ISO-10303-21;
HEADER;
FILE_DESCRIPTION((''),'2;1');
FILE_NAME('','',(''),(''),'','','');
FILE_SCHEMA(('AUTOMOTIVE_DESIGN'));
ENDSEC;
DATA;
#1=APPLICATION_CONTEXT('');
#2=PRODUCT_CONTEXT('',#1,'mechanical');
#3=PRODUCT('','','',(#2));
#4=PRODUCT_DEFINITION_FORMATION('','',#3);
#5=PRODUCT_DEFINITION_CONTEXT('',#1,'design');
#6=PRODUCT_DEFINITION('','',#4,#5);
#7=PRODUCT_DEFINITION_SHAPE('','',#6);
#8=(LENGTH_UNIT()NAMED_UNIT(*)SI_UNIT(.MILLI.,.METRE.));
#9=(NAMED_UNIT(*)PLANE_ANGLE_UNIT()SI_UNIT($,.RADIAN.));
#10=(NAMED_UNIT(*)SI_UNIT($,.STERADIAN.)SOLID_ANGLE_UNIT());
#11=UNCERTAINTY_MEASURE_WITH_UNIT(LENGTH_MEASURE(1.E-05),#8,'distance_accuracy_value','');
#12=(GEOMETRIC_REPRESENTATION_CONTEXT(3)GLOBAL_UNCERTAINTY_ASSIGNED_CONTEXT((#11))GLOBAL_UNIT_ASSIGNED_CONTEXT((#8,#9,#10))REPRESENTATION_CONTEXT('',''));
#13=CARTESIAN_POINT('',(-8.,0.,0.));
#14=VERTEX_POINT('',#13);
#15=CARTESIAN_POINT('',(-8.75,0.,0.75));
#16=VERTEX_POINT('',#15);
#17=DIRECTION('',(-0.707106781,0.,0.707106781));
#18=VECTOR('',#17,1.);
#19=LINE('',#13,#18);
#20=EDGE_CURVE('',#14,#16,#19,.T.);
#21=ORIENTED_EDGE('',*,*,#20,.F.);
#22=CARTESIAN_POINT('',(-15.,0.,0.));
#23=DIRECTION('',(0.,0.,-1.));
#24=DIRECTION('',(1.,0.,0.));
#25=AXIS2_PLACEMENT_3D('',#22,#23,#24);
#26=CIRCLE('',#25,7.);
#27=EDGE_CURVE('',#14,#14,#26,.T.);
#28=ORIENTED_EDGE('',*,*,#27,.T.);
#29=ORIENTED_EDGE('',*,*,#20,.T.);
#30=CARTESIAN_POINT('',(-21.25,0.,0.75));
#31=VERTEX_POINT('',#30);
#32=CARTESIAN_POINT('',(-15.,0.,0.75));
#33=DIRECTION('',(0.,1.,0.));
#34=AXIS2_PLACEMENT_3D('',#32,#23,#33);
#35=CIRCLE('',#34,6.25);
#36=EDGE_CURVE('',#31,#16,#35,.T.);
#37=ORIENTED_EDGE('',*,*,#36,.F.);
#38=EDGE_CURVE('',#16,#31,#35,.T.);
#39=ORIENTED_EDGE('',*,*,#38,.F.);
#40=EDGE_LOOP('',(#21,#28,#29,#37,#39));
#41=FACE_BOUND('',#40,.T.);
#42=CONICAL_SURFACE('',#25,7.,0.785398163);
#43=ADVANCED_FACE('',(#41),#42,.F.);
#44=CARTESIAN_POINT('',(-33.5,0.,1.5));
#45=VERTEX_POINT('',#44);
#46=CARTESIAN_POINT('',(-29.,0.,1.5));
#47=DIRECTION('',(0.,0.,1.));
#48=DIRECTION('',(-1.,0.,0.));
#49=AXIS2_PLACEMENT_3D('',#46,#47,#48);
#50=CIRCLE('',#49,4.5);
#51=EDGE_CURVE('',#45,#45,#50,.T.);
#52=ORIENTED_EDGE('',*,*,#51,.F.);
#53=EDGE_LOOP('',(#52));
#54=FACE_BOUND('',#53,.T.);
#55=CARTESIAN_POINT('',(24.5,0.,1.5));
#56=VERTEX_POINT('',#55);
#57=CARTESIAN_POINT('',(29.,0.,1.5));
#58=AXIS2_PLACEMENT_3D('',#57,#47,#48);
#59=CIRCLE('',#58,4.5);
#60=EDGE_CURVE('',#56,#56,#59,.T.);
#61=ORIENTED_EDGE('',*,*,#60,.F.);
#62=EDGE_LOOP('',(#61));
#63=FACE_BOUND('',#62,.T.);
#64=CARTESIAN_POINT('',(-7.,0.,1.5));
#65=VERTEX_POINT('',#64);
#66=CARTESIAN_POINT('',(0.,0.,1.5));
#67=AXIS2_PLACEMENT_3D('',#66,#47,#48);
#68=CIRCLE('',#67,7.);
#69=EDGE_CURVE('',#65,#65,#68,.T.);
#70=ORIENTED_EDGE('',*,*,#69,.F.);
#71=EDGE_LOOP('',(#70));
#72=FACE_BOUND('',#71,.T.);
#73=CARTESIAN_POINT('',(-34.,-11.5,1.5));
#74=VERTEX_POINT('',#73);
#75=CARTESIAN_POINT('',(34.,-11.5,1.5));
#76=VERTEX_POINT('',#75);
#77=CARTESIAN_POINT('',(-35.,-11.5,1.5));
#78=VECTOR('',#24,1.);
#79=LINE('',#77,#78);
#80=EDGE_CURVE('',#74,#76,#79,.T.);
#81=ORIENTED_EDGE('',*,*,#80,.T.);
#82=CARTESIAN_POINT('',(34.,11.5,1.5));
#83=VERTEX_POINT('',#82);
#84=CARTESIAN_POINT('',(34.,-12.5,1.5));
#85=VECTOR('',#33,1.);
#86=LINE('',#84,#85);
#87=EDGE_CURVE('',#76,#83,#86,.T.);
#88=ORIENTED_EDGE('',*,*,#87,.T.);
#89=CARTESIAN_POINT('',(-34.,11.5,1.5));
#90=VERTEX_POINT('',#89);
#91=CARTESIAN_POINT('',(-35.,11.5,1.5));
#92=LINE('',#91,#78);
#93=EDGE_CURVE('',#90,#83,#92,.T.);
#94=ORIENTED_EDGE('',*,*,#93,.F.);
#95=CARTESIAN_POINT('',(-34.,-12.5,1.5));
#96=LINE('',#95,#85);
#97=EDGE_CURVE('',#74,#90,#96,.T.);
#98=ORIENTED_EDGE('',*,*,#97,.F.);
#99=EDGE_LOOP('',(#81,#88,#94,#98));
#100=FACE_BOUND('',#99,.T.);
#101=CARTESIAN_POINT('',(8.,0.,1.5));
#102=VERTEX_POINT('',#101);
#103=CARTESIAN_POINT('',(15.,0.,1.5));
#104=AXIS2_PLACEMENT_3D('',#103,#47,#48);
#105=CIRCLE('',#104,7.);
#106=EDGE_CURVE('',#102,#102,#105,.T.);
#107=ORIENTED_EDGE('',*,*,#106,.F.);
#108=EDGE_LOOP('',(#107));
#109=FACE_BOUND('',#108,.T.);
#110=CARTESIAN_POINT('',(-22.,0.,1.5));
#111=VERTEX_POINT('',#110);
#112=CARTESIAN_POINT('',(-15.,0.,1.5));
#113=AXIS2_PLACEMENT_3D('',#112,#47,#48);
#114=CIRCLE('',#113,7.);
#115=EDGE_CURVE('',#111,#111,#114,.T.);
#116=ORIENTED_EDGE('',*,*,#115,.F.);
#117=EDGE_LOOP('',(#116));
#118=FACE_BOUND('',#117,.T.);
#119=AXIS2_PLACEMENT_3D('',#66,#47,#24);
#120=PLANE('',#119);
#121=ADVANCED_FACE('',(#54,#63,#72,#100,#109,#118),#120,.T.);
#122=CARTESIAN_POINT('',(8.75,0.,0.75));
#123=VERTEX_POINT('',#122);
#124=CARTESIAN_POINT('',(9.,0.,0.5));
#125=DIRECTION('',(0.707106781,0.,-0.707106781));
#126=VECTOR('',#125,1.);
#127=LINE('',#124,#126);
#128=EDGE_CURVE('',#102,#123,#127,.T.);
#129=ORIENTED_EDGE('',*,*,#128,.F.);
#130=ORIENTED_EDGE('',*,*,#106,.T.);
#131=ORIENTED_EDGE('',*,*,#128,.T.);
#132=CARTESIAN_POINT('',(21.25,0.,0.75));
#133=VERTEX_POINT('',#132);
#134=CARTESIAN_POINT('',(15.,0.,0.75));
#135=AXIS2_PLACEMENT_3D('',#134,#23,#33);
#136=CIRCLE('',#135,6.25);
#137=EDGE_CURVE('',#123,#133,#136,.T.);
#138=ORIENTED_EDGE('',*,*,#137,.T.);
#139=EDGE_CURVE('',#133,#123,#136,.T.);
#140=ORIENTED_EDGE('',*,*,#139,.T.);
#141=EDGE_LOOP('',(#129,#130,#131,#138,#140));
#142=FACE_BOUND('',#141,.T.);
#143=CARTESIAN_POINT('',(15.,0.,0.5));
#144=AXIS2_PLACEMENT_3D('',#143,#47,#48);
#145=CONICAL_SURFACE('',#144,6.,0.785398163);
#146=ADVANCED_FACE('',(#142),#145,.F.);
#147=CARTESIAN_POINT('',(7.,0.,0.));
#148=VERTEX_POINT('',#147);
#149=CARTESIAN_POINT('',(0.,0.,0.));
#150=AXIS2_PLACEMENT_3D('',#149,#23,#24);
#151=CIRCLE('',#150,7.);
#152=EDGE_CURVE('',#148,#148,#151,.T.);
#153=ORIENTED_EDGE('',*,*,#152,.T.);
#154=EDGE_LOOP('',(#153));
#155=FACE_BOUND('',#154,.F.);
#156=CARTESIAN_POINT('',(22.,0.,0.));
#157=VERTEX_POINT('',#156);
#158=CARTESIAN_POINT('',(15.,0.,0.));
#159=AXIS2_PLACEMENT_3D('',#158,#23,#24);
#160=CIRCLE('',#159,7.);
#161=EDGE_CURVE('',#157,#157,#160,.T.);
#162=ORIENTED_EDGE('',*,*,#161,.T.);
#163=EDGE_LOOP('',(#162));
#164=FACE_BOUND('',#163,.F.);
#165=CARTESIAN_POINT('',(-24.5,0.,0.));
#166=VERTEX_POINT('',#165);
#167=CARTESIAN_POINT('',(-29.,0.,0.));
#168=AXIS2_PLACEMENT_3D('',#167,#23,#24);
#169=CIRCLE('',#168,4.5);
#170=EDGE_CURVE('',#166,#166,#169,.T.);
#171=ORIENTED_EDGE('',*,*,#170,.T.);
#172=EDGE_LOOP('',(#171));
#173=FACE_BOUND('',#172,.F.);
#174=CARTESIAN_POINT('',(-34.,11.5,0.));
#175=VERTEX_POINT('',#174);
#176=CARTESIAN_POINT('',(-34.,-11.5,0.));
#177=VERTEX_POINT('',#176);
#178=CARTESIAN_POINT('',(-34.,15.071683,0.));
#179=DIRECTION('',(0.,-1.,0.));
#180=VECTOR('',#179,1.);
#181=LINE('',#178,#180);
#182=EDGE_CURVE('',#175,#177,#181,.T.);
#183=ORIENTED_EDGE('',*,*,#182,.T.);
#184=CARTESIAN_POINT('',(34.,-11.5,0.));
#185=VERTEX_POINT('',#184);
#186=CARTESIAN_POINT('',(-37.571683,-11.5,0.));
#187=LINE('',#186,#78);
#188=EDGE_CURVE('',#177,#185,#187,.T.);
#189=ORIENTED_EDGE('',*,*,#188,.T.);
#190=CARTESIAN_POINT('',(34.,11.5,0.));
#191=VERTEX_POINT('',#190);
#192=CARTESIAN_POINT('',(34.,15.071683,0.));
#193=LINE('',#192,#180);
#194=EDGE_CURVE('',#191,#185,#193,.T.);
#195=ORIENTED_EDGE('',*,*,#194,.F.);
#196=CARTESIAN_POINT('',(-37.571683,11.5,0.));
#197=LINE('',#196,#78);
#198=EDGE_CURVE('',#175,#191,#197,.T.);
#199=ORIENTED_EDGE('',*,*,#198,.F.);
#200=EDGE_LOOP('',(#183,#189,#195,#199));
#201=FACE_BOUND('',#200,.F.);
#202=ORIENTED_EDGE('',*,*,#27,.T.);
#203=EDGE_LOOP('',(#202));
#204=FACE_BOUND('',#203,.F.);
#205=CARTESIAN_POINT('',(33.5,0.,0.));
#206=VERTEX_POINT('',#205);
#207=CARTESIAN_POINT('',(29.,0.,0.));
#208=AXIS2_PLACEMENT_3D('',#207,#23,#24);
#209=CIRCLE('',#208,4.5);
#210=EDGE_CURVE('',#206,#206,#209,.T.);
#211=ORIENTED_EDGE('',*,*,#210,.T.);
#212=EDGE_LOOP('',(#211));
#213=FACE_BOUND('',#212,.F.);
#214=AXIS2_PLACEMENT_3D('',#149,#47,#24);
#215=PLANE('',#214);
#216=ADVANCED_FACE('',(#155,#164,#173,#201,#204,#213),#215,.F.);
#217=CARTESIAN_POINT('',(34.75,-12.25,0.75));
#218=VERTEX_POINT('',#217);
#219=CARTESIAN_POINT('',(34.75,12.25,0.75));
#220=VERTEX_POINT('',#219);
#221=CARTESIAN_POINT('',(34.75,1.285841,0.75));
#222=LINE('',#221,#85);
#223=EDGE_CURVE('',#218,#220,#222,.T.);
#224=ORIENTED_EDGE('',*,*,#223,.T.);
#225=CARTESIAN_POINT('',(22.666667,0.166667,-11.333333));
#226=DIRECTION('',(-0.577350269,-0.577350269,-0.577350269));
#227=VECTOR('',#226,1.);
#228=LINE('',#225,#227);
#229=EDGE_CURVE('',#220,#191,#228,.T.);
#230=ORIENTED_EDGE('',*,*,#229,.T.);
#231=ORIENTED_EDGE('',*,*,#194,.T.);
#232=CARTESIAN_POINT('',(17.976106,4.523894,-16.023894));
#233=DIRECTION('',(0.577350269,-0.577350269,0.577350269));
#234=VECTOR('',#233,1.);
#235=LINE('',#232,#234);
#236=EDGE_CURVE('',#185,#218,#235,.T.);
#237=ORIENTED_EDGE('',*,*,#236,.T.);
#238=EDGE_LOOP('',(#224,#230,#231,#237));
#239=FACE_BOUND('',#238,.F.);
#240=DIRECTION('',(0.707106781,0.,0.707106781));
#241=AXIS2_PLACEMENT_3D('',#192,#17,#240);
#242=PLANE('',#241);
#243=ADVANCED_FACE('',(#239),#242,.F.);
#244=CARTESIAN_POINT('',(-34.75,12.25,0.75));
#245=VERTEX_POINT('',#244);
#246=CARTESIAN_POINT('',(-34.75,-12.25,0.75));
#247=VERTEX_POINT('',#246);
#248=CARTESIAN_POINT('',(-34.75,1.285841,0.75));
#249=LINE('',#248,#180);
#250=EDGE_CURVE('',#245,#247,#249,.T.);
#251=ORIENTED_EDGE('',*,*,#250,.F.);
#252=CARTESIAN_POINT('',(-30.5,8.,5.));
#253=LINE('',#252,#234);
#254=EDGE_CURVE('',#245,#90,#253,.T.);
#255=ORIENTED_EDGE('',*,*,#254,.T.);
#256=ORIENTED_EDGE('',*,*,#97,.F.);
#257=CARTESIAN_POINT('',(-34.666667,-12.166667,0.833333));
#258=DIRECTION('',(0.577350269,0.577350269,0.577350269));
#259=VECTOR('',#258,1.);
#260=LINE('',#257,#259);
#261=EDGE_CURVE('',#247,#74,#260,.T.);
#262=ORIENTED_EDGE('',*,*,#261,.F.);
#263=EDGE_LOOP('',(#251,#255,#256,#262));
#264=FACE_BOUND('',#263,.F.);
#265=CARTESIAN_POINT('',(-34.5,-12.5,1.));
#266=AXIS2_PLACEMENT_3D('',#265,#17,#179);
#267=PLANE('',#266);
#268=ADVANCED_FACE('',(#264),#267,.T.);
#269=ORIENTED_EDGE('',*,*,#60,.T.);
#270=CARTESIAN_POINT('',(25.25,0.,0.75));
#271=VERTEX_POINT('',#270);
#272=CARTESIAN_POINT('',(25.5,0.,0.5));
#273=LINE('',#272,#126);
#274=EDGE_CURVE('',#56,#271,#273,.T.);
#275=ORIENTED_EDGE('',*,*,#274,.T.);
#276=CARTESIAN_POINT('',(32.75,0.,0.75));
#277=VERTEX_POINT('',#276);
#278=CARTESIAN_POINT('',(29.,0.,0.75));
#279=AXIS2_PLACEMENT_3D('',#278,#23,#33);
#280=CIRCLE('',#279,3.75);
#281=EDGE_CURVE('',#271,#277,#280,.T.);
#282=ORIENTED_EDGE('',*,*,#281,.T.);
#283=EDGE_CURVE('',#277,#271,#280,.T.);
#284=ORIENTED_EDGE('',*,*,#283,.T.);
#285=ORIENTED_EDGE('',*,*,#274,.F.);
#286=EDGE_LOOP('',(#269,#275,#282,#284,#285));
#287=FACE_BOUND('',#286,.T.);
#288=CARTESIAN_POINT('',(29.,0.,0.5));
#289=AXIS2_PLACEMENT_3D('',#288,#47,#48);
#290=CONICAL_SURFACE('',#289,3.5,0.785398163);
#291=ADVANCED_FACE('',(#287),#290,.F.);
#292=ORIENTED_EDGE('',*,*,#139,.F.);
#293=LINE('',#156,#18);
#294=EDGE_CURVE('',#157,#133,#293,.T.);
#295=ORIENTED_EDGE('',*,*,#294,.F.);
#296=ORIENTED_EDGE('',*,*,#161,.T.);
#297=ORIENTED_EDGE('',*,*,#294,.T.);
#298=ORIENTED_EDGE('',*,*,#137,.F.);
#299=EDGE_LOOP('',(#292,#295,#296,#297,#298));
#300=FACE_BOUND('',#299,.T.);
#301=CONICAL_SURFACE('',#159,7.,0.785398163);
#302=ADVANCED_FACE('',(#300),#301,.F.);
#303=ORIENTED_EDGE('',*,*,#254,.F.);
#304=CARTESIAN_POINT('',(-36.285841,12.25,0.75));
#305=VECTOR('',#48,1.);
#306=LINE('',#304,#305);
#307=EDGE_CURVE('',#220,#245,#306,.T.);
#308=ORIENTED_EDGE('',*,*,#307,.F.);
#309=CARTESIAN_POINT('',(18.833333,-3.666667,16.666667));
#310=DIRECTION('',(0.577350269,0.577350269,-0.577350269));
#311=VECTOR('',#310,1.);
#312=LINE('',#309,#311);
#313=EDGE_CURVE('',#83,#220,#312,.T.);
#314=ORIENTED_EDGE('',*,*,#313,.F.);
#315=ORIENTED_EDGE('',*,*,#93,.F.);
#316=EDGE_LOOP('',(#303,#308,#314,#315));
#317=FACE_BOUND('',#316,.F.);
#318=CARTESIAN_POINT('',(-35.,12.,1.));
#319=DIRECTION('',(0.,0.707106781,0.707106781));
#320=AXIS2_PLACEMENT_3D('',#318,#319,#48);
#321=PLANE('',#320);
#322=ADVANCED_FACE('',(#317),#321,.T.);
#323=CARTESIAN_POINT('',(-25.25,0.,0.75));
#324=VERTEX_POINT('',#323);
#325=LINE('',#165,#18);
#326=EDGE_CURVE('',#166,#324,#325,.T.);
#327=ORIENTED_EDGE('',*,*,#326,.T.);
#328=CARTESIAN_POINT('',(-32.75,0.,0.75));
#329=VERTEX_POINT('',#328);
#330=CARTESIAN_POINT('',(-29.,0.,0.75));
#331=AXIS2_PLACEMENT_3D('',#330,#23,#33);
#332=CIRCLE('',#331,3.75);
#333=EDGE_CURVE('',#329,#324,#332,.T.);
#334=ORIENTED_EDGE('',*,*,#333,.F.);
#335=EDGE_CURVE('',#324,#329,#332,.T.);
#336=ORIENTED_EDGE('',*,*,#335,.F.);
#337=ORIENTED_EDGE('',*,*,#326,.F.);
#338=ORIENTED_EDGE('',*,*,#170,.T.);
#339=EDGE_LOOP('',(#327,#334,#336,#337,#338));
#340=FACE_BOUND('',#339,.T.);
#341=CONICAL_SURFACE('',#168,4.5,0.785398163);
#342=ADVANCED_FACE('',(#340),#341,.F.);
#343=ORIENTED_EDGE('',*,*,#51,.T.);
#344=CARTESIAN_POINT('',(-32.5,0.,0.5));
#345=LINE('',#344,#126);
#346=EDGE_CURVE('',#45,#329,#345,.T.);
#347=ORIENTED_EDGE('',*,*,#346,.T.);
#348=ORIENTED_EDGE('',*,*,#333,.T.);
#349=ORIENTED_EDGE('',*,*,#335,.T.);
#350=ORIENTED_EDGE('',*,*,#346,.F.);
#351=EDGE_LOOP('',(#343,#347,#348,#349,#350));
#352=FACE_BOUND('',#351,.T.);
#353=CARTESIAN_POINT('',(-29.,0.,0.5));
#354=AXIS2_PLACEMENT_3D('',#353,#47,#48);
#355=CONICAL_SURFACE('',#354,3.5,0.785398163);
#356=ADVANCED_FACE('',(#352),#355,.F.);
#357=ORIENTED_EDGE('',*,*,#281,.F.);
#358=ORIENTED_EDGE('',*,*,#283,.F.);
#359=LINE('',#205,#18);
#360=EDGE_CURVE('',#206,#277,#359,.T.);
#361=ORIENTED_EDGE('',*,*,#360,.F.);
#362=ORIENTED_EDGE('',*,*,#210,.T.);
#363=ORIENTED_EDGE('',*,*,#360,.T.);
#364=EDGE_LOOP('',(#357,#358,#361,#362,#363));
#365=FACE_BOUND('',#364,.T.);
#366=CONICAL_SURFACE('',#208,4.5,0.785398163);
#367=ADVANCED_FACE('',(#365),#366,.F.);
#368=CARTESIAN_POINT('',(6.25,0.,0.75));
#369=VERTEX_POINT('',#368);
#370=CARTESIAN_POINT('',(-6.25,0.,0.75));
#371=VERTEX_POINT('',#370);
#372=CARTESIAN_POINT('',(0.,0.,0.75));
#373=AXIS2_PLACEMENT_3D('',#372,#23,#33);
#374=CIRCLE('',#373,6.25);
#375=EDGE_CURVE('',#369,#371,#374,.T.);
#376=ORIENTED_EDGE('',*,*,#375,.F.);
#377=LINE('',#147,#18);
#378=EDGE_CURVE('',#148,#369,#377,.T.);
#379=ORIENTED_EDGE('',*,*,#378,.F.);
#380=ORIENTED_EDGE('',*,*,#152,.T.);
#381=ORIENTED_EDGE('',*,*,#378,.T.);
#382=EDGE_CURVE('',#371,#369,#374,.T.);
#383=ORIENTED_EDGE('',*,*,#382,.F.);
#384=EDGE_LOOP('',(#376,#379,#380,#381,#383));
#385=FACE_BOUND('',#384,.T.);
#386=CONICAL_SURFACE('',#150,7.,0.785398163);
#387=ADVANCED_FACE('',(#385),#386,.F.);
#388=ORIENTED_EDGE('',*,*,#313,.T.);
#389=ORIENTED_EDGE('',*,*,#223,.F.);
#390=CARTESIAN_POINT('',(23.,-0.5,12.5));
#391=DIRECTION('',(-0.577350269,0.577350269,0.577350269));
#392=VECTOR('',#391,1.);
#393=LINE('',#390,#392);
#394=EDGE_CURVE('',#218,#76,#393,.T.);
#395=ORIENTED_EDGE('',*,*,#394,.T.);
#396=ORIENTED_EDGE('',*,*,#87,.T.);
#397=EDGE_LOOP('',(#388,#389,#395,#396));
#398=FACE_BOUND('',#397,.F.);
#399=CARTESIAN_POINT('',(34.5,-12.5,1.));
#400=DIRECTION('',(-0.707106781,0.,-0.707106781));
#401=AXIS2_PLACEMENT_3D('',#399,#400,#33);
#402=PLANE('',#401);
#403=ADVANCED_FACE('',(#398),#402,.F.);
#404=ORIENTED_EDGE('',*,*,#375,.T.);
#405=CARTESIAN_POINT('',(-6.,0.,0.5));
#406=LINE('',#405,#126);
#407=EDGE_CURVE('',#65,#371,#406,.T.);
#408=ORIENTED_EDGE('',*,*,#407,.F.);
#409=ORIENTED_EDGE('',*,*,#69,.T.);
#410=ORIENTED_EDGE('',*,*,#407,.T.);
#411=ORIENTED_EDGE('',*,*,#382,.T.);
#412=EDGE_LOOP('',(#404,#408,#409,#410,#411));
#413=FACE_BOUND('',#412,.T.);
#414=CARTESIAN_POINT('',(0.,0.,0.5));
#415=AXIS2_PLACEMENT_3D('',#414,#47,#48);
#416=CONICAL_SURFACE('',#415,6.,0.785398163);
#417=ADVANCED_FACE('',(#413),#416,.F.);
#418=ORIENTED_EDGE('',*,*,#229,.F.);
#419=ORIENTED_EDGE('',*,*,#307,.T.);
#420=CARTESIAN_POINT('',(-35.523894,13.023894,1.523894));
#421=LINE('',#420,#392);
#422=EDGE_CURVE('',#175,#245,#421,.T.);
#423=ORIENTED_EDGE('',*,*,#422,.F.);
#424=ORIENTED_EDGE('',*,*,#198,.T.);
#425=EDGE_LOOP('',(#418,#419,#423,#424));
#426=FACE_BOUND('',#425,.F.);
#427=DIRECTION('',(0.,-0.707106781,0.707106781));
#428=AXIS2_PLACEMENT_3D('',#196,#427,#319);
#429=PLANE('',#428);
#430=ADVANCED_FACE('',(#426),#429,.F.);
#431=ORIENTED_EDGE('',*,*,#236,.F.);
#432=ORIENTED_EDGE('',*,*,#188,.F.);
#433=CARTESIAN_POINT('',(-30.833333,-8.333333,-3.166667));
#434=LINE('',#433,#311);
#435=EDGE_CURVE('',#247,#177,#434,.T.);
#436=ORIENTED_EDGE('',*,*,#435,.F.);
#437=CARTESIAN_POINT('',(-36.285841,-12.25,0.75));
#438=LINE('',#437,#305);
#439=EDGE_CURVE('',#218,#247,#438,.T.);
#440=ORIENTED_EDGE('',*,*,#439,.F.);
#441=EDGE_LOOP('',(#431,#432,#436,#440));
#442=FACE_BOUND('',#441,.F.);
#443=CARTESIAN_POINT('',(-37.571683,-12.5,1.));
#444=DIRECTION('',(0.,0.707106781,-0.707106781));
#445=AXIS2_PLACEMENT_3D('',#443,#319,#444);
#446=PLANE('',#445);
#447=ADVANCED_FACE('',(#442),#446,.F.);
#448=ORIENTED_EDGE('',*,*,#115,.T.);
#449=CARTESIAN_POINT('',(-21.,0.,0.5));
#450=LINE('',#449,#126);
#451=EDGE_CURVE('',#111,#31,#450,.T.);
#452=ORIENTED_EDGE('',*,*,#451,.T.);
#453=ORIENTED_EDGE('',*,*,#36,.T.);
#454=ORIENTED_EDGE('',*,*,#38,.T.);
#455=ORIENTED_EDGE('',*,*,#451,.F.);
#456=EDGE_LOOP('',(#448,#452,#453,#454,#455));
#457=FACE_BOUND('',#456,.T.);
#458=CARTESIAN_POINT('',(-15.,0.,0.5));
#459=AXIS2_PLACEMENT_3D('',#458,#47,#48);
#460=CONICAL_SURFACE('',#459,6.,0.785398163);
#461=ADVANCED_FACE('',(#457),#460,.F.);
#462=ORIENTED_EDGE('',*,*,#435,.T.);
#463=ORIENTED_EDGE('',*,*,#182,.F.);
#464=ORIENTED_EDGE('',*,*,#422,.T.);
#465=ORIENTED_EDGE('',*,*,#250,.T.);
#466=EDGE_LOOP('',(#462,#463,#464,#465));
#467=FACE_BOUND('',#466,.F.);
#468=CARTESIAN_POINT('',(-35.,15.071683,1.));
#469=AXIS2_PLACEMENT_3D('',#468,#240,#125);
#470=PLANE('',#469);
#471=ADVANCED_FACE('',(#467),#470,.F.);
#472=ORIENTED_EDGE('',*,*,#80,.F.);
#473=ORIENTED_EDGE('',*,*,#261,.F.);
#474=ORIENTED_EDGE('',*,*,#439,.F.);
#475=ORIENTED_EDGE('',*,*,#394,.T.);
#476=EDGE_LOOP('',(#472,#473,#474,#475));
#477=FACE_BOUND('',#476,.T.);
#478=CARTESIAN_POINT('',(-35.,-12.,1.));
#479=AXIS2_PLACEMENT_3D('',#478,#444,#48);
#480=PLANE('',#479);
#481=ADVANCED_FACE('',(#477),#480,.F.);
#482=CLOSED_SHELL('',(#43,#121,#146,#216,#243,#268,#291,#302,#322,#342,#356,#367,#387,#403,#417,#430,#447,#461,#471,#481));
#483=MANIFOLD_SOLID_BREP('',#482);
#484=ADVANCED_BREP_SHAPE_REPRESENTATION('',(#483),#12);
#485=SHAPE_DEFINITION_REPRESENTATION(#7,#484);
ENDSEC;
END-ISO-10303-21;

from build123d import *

# Parameters (mm, degrees)
F0_W        = 70
F0_H        = 25
F1_DEPTH    = 1.5
F2_D        = 7
F3_D        = 12
F4_SIZE     = 1
F5_T1_DEPTH = 75.1433659759
F5_T3_DEPTH = 30.1433659759


# Not quite as in the source:
# - a fillet or chamfer that OpenCascade refuses, or shapes differently, is made with other operations: its cross-section is extruded or revolved along the edge and cut away or added


with BuildPart() as f1:
    # F0 (on Top) → F1 (new body)
    with BuildSketch(Plane.XY):
        Rectangle(F0_W, F0_H)
    extrude(amount=F1_DEPTH)

    # F2 (through all)
    with Locations(Plane(origin=(0, 0, 0), x_dir=(1, 0, 0), z_dir=(0, 0, -1))):
        with Locations((-29, 0), (29, 0)):
            Hole(F2_D / 2)

    # F3 (through all)
    with Locations(Plane(origin=(0, 0, 0), x_dir=(1, 0, 0), z_dir=(0, 0, -1))):
        with Locations((-15, 0), (0, 0), (15, 0)):
            Hole(F3_D / 2)

    # F4
    f4_edges = [f1.edges().sort_by_distance(p)[0] for p in [
        (0, -12.5, 1.5),
        (-35, 0, 1.5),
        (35, 0, 1.5),
        (0, 12.5, 1.5),
        (-32.5, 0, 1.5),
        (-21, 0, 1.5),
        (-6, 0, 1.5),
        (9, 0, 1.5),
        (25.5, 0, 1.5),
    ]]
    chamfer(f4_edges, length=F4_SIZE)

    # F5: chamfer of 1 on 9 edges, made by hand

    # F5_s2 → F5_t1 (cut)
    with BuildSketch(Plane.YZ.offset(-37.571682988)):
        Polygon((-12.5, 1), (-11.5, 0), (-12.5, 0), align=None)
        Polygon((11.5, 0), (12.5, 1), (12.5, 0), align=None)
    extrude(amount=F5_T1_DEPTH, mode=Mode.SUBTRACT)

    # F5_s4 → F5_t3 (cut)
    with BuildSketch(Plane.XZ.offset(-15.071682988)):
        Polygon((-35, 1), (-34, 0), (-35, 0), align=None)
        Polygon((34, 0), (35, 1), (35, 0), align=None)
    extrude(amount=F5_T3_DEPTH, mode=Mode.SUBTRACT)

    # F5_s5 → F5_t6 (revolve, cut)
    with BuildSketch(Plane.XZ):
        Polygon((-24.5, 0), (-25.5, 1), (-25.5, 0), align=None)
    revolve(axis=Axis((-29, 0, 0), (0, 0, -1)), mode=Mode.SUBTRACT)

    # F5_s7 → F5_t8 (revolve, cut)
    with BuildSketch(Plane.XZ):
        Polygon((-8, 0), (-9, 1), (-9, 0), align=None)
    revolve(axis=Axis((-15, 0, 0), (0, 0, -1)), mode=Mode.SUBTRACT)

    # F5_s9 → F5_t10 (revolve, cut)
    with BuildSketch(Plane.XZ):
        Polygon((7, 0), (6, 1), (6, 0), align=None)
    revolve(axis=Axis((0, 0, 0), (0, 0, -1)), mode=Mode.SUBTRACT)

    # F5_s11 → F5_t12 (revolve, cut)
    with BuildSketch(Plane.XZ):
        Polygon((22, 0), (21, 1), (21, 0), align=None)
    revolve(axis=Axis((15, 0, 0), (0, 0, -1)), mode=Mode.SUBTRACT)

    # F5_s13 → F5_t14 (revolve, cut)
    with BuildSketch(Plane.XZ):
        Polygon((33.5, 0), (32.5, 1), (32.5, 0), align=None)
    revolve(axis=Axis((29, 0, 0), (0, 0, -1)), mode=Mode.SUBTRACT)


solid = f1.part
